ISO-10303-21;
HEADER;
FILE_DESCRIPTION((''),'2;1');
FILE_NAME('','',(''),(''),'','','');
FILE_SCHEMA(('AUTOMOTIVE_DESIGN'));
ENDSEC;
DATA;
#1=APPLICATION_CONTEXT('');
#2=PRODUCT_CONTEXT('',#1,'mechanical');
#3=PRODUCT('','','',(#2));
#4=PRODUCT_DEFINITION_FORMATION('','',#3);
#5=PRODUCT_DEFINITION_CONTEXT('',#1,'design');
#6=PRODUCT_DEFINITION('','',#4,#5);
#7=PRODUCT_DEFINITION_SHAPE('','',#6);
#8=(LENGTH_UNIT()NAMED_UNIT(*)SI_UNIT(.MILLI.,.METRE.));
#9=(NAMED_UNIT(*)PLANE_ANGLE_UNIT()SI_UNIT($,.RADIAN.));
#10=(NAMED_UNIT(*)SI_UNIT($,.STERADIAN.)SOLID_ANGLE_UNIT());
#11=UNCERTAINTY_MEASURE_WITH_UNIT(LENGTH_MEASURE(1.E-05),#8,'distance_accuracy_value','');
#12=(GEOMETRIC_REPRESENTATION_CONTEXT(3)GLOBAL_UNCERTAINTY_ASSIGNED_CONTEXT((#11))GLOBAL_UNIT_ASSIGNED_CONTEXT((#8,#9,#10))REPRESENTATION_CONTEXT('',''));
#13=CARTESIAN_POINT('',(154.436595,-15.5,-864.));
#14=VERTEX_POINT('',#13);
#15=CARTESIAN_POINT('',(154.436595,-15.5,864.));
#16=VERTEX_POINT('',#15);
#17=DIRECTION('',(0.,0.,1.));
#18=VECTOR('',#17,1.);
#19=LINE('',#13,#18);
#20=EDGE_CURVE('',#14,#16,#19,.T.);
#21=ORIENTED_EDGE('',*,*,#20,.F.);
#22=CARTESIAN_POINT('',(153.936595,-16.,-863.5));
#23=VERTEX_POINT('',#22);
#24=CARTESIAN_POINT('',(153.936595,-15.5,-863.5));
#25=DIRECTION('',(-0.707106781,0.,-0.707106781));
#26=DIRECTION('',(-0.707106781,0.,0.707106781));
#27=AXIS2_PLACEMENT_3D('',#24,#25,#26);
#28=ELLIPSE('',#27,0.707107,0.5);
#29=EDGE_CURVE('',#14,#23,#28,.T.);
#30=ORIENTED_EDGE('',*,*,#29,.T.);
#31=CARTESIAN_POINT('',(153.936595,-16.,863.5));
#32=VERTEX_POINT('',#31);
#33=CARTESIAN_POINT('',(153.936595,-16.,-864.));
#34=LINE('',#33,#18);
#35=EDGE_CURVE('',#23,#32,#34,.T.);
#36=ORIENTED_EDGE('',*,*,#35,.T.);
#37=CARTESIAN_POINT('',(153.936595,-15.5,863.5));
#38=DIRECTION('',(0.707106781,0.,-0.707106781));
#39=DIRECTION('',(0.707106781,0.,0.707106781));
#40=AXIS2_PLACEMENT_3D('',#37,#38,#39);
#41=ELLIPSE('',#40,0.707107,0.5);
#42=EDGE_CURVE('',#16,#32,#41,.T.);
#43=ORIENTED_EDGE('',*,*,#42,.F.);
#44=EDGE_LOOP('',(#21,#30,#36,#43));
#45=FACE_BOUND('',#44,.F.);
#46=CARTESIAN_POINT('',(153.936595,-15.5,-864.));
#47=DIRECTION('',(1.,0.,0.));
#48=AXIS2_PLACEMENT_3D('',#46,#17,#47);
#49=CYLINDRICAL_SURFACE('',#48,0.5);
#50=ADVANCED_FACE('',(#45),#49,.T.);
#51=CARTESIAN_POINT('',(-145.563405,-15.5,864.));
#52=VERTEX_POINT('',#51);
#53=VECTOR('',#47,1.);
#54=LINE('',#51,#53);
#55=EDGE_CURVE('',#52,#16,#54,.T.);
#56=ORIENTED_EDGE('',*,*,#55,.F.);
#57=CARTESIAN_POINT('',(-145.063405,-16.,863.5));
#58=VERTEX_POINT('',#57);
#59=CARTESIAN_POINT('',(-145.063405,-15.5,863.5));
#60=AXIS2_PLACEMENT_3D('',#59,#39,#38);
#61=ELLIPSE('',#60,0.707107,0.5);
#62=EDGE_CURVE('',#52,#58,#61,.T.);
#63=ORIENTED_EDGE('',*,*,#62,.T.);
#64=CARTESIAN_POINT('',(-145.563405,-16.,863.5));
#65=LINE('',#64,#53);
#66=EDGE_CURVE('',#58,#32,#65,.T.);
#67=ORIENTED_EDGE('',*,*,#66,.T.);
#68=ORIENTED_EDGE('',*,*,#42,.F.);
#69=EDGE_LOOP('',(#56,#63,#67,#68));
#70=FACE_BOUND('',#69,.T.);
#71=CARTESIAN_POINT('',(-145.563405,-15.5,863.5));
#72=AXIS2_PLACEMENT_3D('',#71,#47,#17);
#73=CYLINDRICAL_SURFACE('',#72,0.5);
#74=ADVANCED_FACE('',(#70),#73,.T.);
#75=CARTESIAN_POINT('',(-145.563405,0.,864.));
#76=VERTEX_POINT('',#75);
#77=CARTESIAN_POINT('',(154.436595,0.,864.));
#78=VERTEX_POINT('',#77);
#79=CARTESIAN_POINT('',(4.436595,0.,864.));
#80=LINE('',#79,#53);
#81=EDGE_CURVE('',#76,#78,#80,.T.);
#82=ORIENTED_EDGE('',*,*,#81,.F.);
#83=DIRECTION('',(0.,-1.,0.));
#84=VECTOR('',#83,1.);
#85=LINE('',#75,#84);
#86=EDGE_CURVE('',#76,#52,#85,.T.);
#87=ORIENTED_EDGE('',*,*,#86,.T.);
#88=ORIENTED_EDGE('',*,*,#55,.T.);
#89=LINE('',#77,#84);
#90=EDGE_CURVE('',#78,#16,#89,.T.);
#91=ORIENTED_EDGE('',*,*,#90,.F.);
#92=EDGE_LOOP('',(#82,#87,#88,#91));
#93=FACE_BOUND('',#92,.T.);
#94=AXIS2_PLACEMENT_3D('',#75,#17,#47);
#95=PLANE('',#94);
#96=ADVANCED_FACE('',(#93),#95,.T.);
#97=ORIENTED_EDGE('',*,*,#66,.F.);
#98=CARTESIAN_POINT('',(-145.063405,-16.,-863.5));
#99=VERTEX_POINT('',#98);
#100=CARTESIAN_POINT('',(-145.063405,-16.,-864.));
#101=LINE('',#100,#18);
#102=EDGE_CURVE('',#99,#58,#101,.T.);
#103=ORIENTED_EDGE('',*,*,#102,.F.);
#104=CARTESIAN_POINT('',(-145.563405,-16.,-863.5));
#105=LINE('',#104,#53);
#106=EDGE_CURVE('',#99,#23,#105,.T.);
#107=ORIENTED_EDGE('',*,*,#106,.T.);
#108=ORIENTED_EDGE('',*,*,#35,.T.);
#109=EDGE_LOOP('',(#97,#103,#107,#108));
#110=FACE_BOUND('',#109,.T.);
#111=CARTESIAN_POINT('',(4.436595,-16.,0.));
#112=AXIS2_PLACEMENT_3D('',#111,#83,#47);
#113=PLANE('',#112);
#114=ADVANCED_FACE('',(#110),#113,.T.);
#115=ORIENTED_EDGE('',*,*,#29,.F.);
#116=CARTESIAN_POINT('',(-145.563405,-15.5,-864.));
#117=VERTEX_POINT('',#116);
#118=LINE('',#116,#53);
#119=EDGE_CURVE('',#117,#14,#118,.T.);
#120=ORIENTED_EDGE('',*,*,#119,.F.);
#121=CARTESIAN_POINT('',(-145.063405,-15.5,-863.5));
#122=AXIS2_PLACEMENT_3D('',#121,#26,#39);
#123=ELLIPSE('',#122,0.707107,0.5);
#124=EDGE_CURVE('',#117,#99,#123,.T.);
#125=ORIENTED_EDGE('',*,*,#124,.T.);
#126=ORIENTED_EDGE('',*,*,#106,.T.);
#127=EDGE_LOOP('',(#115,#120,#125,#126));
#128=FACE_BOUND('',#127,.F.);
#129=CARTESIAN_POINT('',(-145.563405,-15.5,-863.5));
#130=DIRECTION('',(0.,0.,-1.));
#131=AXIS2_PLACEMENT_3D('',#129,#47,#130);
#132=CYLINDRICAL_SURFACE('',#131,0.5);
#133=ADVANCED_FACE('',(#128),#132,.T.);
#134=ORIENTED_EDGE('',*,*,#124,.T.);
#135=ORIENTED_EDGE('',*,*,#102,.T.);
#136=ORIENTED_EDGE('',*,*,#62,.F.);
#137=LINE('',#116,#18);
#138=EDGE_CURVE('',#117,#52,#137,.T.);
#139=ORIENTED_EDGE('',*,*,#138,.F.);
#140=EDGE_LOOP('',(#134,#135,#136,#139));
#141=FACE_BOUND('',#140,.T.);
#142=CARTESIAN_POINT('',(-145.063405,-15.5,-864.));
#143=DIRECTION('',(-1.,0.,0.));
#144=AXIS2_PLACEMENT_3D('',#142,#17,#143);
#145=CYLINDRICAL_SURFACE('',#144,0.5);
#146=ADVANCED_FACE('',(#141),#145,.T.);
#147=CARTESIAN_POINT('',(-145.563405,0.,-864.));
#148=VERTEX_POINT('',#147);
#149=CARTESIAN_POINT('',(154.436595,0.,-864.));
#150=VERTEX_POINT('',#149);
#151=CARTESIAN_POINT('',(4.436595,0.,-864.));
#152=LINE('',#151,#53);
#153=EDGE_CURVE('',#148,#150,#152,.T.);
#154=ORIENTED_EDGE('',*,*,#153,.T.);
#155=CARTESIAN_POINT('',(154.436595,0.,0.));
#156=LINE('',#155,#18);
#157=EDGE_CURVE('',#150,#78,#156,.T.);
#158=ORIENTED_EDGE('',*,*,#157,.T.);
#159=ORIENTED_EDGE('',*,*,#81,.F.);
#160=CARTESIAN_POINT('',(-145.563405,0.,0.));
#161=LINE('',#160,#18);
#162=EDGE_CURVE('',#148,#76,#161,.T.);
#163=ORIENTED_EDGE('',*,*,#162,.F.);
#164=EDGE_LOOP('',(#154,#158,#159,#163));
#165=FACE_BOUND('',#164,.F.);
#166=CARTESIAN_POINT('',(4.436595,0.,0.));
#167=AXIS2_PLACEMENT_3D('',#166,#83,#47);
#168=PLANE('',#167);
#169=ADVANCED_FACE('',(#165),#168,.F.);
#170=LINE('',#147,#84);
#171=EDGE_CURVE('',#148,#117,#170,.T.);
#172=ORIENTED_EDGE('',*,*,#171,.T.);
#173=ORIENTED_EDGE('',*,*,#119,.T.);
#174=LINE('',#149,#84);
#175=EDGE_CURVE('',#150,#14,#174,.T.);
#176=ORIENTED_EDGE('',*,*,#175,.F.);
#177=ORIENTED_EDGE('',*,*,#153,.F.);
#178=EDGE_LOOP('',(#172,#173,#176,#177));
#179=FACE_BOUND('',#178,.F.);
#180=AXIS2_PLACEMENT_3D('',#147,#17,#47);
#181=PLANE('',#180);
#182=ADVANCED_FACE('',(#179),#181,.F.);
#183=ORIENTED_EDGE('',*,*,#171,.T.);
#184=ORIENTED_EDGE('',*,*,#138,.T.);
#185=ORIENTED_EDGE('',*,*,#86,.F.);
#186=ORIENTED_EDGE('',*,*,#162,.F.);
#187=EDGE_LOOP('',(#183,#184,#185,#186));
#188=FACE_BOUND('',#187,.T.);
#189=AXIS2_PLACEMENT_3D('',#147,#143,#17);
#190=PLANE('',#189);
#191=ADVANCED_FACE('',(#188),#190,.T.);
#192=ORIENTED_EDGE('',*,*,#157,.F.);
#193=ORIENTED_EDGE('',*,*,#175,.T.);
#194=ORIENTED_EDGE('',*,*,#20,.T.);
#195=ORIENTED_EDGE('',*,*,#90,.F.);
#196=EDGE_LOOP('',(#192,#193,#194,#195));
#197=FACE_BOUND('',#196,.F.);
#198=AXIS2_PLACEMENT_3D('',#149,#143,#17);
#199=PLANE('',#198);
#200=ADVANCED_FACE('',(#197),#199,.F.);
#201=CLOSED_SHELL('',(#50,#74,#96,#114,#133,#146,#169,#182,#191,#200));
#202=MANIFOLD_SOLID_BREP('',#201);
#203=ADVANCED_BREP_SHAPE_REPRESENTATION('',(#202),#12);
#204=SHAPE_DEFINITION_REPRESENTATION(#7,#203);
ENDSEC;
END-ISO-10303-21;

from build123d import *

# Parameters (mm, degrees)
F0_W     = 300
F0_H     = 1728
F1_DEPTH = 16
F2_R     = 0.5
F3_ANGLE = 180


# Not quite as in the source:
# - a feature of the source that left no trace in its solid (it failed there, or was rolled back) is left out


with BuildPart() as f1:
    # F0 (on Front) → F1 (new body)
    with BuildSketch(Plane.XZ):
        with Locations((4.4365953654, 0)):
            Rectangle(F0_W, F0_H)
    extrude(amount=F1_DEPTH)

    # F2
    f2_edges = [f1.edges().sort_by_distance(p)[0] for p in [
        (154.436595, -16, 0),
        (4.436595, -16, 864),
        (-145.563405, -16, 0),
        (4.436595, -16, -864),
    ]]
    fillet(f2_edges, radius=F2_R)


with BuildPart() as f3_1:
    # F3: copy of F1
    add(f1.part.rotate(Axis((154.4365953654, 0, 0), (0, 0, -1)), F3_ANGLE))


solid = f1.part
